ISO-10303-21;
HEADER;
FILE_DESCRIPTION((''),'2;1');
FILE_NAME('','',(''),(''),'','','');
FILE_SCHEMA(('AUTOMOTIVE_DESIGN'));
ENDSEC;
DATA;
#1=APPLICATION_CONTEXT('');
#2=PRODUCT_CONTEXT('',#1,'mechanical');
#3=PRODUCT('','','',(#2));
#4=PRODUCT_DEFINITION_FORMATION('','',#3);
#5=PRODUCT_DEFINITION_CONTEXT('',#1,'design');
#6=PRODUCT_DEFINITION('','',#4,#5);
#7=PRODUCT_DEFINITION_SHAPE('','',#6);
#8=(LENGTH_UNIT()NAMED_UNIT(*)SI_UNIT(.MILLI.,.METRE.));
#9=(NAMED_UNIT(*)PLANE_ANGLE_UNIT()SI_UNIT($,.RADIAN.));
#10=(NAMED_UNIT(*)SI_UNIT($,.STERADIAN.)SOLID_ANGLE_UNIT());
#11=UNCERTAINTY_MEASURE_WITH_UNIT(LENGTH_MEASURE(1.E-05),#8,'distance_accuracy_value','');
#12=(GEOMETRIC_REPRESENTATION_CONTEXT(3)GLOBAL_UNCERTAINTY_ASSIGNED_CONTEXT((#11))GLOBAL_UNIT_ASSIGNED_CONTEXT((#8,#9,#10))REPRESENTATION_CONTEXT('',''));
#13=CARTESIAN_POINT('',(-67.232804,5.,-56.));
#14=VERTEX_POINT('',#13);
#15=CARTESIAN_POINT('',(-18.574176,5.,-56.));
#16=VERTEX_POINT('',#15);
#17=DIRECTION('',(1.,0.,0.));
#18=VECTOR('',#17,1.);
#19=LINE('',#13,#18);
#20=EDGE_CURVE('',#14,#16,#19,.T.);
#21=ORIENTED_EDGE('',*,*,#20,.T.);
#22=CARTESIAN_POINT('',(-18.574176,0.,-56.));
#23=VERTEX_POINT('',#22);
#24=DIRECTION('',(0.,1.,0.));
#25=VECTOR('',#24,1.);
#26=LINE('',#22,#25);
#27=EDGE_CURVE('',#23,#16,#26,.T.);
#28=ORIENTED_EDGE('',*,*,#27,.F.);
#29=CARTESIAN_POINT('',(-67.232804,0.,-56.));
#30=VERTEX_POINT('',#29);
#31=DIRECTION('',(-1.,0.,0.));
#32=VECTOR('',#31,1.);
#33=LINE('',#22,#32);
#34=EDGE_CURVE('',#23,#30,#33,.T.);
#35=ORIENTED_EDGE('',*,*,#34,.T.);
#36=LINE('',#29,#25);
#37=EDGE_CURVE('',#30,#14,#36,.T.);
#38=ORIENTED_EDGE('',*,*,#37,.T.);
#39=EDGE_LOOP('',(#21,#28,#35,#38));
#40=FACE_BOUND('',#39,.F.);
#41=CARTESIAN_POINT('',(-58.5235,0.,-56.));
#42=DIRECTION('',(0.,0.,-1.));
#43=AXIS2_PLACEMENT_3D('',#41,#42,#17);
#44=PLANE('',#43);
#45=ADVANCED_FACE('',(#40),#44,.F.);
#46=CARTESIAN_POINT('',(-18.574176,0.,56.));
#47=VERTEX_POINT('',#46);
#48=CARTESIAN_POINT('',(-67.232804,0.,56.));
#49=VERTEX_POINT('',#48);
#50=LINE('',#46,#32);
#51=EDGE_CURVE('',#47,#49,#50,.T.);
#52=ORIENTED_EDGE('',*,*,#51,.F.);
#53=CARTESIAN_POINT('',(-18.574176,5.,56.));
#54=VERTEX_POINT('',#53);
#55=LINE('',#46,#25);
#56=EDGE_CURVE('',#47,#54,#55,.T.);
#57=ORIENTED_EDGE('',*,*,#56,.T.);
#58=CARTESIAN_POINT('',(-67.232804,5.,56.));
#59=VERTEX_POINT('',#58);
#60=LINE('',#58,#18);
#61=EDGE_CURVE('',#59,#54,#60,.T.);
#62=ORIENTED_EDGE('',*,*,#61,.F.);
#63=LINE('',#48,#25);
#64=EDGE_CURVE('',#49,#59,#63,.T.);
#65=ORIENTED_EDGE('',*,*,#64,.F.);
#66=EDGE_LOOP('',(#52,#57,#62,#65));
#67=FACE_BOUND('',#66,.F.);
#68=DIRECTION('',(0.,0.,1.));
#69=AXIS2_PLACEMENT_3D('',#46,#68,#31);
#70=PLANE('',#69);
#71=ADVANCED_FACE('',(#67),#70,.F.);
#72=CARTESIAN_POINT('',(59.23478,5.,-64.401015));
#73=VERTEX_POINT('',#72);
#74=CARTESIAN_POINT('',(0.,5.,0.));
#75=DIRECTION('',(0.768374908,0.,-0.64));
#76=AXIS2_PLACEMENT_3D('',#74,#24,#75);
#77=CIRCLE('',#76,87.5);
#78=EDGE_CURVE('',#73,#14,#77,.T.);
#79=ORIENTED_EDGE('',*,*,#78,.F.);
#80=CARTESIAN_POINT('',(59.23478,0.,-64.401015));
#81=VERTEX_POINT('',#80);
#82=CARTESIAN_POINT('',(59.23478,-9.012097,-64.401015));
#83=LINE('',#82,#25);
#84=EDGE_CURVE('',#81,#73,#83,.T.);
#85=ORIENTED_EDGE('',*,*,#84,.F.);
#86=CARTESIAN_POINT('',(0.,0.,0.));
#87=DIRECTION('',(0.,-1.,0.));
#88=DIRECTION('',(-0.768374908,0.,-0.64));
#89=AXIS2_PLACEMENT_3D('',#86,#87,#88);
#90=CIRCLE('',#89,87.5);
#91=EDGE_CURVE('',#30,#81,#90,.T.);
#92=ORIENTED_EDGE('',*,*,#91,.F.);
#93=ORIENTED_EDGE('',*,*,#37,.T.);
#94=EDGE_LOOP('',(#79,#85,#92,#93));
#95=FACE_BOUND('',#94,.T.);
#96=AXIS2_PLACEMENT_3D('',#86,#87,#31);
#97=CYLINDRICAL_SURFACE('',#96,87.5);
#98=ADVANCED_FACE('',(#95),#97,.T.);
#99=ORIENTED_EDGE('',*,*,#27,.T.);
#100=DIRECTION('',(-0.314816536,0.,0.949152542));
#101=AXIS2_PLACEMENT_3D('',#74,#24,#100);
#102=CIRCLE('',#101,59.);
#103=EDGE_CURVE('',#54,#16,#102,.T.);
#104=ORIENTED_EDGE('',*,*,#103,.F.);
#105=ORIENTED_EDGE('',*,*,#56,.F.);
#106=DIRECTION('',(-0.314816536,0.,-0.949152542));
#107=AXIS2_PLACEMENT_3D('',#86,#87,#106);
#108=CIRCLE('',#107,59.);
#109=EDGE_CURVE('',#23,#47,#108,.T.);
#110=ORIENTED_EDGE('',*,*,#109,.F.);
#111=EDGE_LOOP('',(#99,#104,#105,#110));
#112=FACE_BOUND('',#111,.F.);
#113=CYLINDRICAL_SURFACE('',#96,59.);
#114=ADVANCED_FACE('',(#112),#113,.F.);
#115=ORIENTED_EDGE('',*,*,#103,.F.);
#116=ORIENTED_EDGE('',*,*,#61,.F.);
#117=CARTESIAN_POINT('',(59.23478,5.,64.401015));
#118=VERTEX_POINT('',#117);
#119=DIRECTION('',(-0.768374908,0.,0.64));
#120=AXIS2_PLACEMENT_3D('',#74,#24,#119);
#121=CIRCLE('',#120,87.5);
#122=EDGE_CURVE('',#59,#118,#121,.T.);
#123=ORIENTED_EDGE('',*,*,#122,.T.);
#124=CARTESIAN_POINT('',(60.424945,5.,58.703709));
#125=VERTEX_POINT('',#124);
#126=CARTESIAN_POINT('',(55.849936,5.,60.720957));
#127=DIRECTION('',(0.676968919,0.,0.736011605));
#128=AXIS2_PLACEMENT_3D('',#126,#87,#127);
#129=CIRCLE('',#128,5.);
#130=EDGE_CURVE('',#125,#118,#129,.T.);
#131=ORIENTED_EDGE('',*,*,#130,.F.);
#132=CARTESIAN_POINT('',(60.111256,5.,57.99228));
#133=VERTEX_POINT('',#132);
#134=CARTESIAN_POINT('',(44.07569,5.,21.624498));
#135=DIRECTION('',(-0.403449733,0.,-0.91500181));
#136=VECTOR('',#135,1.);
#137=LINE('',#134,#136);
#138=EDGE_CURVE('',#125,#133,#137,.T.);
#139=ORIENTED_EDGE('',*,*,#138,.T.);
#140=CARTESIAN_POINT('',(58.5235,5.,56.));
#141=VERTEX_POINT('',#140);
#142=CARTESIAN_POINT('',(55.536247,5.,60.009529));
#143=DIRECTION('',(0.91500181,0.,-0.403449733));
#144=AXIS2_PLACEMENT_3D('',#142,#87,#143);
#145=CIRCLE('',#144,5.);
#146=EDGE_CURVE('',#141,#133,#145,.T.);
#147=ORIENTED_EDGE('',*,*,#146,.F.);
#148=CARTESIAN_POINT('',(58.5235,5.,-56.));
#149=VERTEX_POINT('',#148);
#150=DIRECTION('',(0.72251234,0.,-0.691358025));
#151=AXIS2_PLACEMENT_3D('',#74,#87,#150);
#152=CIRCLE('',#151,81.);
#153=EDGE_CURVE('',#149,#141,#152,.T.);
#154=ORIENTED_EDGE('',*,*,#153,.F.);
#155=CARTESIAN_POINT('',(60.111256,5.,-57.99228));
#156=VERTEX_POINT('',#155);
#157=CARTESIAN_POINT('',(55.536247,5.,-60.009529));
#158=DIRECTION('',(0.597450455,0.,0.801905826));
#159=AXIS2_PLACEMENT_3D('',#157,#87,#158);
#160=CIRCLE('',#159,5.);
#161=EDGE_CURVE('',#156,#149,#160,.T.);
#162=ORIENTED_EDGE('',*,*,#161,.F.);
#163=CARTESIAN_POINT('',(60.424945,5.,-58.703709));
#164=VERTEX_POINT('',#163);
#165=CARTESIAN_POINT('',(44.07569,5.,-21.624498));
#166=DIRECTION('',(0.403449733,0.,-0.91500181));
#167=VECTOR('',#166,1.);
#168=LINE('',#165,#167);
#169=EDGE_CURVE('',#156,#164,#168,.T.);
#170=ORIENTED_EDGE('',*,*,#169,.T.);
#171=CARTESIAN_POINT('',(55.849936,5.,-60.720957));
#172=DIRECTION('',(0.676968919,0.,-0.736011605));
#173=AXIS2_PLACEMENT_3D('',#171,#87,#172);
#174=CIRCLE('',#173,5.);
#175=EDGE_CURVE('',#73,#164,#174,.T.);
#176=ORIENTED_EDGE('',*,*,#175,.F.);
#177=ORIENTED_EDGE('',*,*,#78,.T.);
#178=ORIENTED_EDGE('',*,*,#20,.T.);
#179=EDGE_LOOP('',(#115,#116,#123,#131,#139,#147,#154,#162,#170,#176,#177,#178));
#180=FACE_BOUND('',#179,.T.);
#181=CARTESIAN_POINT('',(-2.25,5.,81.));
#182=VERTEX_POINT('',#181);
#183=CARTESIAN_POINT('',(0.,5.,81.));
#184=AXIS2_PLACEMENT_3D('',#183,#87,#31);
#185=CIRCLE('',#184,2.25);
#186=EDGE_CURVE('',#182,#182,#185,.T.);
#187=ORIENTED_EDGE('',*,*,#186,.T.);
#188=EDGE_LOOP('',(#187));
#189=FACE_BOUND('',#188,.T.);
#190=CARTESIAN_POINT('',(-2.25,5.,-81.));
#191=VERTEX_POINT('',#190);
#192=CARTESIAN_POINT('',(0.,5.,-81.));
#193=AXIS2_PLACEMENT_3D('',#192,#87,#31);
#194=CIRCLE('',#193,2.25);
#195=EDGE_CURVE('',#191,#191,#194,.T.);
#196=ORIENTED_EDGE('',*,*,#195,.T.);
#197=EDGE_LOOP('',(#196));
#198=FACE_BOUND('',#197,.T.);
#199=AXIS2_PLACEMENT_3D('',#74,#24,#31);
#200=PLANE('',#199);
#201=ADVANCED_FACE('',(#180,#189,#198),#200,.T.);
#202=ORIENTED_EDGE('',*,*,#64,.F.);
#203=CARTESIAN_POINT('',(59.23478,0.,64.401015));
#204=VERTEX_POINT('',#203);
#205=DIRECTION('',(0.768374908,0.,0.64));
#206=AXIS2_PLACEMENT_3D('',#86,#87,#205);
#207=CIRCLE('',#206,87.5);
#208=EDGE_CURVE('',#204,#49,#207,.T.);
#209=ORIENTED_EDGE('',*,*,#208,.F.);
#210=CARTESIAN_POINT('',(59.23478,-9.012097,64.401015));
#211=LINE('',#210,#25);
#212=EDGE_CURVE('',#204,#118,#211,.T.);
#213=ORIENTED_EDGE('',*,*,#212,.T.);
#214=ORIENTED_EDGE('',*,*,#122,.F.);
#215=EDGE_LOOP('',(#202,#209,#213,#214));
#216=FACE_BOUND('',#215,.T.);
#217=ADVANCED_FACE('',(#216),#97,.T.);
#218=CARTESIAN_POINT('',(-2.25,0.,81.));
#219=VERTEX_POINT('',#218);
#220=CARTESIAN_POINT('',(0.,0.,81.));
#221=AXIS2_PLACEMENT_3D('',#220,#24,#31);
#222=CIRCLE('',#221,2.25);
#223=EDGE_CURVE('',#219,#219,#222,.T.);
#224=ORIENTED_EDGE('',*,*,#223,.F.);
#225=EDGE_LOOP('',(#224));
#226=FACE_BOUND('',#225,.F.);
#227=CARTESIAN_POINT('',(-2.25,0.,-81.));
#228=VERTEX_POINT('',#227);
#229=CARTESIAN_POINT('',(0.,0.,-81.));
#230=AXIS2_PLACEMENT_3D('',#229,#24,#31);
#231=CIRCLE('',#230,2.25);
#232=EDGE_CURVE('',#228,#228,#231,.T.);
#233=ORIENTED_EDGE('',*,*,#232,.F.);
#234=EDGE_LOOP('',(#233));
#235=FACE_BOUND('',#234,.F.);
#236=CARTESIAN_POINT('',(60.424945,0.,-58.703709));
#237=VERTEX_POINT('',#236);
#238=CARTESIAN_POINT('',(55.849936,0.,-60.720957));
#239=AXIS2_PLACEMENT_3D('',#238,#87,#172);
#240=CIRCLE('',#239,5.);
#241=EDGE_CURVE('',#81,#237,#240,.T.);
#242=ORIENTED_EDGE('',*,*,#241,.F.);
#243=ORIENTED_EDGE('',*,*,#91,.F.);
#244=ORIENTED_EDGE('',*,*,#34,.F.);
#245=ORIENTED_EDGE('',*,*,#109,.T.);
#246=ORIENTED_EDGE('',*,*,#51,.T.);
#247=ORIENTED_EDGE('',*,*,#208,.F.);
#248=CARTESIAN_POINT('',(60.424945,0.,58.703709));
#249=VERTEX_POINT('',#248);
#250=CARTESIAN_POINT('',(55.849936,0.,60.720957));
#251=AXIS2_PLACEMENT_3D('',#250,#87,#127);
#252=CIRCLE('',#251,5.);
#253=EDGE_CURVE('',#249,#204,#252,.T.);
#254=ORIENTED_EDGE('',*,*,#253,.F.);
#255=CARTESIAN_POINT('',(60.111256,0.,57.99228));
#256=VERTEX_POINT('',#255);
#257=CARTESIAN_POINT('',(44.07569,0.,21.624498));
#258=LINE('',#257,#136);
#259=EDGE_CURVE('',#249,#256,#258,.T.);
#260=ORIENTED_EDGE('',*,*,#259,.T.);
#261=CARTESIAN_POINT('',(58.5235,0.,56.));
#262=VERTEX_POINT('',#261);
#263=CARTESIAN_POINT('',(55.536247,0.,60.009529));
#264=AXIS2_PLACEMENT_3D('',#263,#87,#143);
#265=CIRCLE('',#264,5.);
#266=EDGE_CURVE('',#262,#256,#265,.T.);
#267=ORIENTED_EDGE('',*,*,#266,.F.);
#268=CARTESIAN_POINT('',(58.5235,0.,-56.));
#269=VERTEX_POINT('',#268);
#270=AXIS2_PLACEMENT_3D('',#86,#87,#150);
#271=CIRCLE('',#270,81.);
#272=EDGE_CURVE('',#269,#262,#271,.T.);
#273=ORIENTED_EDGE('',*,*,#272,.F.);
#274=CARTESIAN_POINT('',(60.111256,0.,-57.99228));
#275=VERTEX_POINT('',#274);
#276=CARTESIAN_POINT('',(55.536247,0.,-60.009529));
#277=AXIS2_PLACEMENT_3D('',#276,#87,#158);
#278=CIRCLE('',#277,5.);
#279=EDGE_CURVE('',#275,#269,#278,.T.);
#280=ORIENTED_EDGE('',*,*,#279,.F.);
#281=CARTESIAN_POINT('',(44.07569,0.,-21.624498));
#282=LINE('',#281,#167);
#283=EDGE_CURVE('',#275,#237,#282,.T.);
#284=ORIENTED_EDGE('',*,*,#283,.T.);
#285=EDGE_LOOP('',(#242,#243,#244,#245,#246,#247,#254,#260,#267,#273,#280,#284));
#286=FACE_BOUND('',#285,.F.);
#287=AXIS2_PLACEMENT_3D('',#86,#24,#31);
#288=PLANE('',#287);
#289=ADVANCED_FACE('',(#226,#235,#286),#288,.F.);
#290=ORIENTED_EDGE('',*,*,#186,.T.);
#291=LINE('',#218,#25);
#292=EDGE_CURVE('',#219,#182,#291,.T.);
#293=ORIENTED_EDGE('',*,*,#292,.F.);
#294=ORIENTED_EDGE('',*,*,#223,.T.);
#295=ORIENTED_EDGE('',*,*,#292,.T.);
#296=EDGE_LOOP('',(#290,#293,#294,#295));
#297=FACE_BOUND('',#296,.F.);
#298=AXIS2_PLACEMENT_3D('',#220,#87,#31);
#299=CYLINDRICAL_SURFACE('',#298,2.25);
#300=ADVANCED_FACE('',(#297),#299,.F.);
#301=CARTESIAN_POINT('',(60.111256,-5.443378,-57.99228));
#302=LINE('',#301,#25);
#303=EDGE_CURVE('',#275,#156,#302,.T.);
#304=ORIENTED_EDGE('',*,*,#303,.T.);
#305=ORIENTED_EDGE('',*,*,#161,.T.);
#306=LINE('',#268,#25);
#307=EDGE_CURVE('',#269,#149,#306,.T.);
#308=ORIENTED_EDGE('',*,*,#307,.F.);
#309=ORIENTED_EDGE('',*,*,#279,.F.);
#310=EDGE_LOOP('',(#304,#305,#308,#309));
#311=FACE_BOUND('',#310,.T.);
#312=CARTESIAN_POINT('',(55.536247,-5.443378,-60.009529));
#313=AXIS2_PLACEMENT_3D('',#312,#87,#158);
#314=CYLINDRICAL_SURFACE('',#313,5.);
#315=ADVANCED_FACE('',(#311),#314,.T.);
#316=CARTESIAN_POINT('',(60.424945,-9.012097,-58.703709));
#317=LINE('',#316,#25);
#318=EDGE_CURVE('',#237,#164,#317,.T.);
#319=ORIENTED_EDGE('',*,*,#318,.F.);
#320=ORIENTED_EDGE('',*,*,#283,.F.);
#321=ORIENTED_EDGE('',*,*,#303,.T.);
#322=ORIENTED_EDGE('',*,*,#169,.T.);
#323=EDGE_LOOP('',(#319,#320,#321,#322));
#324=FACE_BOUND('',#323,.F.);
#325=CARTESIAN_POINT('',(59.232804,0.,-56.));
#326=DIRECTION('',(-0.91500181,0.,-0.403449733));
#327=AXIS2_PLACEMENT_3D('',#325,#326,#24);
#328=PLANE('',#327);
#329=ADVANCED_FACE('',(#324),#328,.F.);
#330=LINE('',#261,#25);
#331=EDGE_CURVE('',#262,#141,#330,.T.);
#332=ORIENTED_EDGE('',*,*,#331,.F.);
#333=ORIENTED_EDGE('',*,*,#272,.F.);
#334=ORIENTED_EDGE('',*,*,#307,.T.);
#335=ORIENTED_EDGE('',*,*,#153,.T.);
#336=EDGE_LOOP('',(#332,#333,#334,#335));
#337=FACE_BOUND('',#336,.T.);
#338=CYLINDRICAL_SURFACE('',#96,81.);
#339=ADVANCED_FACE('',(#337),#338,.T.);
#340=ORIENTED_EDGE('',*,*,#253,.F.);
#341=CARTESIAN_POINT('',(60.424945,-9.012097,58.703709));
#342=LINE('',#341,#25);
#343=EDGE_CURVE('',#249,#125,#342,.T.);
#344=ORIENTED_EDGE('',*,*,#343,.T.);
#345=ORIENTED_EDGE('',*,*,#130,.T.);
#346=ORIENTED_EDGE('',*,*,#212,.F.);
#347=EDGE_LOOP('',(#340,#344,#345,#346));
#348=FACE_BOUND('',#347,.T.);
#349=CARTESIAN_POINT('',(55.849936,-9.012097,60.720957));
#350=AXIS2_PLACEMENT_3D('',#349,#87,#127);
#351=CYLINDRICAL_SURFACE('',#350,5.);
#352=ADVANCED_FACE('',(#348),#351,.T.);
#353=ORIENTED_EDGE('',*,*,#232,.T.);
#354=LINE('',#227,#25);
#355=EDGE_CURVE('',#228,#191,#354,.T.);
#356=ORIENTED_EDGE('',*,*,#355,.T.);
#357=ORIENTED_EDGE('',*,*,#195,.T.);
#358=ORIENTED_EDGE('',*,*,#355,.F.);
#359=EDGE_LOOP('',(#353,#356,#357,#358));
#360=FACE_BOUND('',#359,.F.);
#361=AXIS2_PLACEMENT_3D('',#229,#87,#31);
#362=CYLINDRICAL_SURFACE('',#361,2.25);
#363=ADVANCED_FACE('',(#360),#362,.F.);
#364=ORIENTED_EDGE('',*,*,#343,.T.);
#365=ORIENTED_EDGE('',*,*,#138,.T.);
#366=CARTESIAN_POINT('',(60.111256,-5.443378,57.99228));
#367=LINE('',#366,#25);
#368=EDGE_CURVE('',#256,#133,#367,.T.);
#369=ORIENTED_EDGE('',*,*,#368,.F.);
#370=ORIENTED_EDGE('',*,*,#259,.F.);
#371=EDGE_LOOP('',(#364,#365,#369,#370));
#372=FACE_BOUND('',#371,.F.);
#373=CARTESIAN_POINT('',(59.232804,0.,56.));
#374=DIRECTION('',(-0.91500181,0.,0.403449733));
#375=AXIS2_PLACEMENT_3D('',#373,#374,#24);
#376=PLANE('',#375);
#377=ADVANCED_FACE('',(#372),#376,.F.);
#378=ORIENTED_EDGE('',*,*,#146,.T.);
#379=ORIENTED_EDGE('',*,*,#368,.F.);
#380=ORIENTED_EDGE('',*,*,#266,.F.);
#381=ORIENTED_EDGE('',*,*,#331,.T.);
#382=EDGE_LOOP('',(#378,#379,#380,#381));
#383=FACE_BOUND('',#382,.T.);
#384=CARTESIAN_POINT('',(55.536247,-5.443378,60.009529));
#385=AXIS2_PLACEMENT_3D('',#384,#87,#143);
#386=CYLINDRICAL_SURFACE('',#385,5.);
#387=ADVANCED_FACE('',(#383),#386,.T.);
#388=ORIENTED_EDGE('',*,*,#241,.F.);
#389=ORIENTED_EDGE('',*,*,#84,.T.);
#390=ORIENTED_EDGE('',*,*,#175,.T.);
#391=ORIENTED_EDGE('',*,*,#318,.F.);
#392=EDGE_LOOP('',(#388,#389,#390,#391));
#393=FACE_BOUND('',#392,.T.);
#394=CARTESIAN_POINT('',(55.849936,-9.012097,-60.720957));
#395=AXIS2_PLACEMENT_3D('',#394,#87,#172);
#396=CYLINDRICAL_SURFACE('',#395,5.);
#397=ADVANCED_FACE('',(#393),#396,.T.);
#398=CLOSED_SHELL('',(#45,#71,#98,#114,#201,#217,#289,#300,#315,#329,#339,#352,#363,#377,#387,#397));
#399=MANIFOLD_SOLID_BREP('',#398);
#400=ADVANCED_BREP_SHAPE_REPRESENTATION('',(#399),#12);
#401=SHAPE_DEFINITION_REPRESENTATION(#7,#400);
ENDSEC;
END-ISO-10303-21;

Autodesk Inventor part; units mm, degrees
ref_plane "YZ Plane" through (0, 0, 0) normal (1, 0, 0) x (0, 1, 0)
ref_plane "XZ Plane" through (0, 0, 0) normal (0, 1, 0) x (-1, 0, 0)
ref_plane "XY Plane" through (0, 0, 0) normal (0, 0, 1) x (1, 0, 0)
sketch "Sketch1" plane through (0, 0, 0) normal (0, 1, 0) x (-1, 0, 0)
  circle A0 centre (0, 0) radius 59
  circle A1 centre (0, 0) radius 81
  circle A2 centre (0, 0) radius 87.5
  circle A3 centre (0, 81) radius 2.25
  circle A4 centre (0, -81) radius 2.25
  line L0 (90, -56) -> (15, -56)
  line L1 (10, -51) -> (10, 51)
  line L2 (15, 56) -> (90, 56)
  line L3 (90, 56) -> (90, -56)
  line L4 (90, -56) -> (10, 56) construction
  line L5 (10, -56) -> (90, 56) construction
  arc A5 (10, -51) -> (15, -56) centre (15, -51) ccw
  arc A6 (15, 56) -> (10, 51) centre (15, 51) ccw
  line L6 (0, 103.0841) -> (0, -103.0841)
  line L7 (-90, -56) -> (-15, -56)
  line L8 (-10, -51) -> (-10, 51)
  line L9 (-15, 56) -> (-90, 56)
  line L10 (-90, 56) -> (-90, -56)
  arc A7 (-15, -56) -> (-10, -51) centre (-15, -51) ccw
  arc A8 (-10, 51) -> (-15, 56) centre (-15, 51) ccw
  point P0 (50, 0)
  point P1 (90, 0)
  point P2 (10, 0)
  point P3 (56.2614, -45.3902)
  point P4 (56.2614, 63.4399)
  point P5 (76.2614, 44.4685)
  point P6 (76.2614, -26.4188)
  point P7 (63.4942, 65.0248)
  point P8 (63.4942, -46.9752)
  point P9 (18.5742, -56)
  point P10 (18.5742, 56)
  point P11 (67.2328, 56)
  point P12 (-67.2328, 56)
  point P13 (-58.5235, 56)
  point P14 (-58.5235, -56)
  point P15 (-67.2328, -56)
  point P16 (67.2328, -56)
  dimension "d0" = 118
  dimension "d1" = 162
  dimension "d2" = 175
  dimension "d3" = 4.5
  dimension "d4" = 4.5
  dimension "d5" = 112
  dimension "d6" = 80
  dimension "d7" = 10
  dimension "d8" = 5
  dimension "d9" = 0
  dimension "d10" = 0
  dimension "d11" = 56
extrude "Extrusion1" add sketch "Sketch1" along normal blind 5 contours A0 L6 A3 A1 L2 | L0 A1 A4 L6 A0 | A0 L9 A1 A3 L6 | A1 A3 L6 A2 L2 | L6 A4 A1 L7 A0 | L0 A2 L6 A4 A1 | A0 L7 A1 L9 | L9 A2 L6 A3 A1 | A1 A4 L6 A2 L7
chamfer "Chamfer1" distance 8 angle 45 2 edges at (67.2328, 2.5, 56) (67.2328, 2.5, -56)
fillet "Fillet1" radius 5 4 edges at (61.8372, 2.5, -61.9065) (59.2328, 2.5, 56) (61.8372, 2.5, 61.9065) (59.2328, 2.5, -56)
equation "\"d11\" = 0.5 * d5"
properties part number "Cylinder Segment Holder Both Cameras"
